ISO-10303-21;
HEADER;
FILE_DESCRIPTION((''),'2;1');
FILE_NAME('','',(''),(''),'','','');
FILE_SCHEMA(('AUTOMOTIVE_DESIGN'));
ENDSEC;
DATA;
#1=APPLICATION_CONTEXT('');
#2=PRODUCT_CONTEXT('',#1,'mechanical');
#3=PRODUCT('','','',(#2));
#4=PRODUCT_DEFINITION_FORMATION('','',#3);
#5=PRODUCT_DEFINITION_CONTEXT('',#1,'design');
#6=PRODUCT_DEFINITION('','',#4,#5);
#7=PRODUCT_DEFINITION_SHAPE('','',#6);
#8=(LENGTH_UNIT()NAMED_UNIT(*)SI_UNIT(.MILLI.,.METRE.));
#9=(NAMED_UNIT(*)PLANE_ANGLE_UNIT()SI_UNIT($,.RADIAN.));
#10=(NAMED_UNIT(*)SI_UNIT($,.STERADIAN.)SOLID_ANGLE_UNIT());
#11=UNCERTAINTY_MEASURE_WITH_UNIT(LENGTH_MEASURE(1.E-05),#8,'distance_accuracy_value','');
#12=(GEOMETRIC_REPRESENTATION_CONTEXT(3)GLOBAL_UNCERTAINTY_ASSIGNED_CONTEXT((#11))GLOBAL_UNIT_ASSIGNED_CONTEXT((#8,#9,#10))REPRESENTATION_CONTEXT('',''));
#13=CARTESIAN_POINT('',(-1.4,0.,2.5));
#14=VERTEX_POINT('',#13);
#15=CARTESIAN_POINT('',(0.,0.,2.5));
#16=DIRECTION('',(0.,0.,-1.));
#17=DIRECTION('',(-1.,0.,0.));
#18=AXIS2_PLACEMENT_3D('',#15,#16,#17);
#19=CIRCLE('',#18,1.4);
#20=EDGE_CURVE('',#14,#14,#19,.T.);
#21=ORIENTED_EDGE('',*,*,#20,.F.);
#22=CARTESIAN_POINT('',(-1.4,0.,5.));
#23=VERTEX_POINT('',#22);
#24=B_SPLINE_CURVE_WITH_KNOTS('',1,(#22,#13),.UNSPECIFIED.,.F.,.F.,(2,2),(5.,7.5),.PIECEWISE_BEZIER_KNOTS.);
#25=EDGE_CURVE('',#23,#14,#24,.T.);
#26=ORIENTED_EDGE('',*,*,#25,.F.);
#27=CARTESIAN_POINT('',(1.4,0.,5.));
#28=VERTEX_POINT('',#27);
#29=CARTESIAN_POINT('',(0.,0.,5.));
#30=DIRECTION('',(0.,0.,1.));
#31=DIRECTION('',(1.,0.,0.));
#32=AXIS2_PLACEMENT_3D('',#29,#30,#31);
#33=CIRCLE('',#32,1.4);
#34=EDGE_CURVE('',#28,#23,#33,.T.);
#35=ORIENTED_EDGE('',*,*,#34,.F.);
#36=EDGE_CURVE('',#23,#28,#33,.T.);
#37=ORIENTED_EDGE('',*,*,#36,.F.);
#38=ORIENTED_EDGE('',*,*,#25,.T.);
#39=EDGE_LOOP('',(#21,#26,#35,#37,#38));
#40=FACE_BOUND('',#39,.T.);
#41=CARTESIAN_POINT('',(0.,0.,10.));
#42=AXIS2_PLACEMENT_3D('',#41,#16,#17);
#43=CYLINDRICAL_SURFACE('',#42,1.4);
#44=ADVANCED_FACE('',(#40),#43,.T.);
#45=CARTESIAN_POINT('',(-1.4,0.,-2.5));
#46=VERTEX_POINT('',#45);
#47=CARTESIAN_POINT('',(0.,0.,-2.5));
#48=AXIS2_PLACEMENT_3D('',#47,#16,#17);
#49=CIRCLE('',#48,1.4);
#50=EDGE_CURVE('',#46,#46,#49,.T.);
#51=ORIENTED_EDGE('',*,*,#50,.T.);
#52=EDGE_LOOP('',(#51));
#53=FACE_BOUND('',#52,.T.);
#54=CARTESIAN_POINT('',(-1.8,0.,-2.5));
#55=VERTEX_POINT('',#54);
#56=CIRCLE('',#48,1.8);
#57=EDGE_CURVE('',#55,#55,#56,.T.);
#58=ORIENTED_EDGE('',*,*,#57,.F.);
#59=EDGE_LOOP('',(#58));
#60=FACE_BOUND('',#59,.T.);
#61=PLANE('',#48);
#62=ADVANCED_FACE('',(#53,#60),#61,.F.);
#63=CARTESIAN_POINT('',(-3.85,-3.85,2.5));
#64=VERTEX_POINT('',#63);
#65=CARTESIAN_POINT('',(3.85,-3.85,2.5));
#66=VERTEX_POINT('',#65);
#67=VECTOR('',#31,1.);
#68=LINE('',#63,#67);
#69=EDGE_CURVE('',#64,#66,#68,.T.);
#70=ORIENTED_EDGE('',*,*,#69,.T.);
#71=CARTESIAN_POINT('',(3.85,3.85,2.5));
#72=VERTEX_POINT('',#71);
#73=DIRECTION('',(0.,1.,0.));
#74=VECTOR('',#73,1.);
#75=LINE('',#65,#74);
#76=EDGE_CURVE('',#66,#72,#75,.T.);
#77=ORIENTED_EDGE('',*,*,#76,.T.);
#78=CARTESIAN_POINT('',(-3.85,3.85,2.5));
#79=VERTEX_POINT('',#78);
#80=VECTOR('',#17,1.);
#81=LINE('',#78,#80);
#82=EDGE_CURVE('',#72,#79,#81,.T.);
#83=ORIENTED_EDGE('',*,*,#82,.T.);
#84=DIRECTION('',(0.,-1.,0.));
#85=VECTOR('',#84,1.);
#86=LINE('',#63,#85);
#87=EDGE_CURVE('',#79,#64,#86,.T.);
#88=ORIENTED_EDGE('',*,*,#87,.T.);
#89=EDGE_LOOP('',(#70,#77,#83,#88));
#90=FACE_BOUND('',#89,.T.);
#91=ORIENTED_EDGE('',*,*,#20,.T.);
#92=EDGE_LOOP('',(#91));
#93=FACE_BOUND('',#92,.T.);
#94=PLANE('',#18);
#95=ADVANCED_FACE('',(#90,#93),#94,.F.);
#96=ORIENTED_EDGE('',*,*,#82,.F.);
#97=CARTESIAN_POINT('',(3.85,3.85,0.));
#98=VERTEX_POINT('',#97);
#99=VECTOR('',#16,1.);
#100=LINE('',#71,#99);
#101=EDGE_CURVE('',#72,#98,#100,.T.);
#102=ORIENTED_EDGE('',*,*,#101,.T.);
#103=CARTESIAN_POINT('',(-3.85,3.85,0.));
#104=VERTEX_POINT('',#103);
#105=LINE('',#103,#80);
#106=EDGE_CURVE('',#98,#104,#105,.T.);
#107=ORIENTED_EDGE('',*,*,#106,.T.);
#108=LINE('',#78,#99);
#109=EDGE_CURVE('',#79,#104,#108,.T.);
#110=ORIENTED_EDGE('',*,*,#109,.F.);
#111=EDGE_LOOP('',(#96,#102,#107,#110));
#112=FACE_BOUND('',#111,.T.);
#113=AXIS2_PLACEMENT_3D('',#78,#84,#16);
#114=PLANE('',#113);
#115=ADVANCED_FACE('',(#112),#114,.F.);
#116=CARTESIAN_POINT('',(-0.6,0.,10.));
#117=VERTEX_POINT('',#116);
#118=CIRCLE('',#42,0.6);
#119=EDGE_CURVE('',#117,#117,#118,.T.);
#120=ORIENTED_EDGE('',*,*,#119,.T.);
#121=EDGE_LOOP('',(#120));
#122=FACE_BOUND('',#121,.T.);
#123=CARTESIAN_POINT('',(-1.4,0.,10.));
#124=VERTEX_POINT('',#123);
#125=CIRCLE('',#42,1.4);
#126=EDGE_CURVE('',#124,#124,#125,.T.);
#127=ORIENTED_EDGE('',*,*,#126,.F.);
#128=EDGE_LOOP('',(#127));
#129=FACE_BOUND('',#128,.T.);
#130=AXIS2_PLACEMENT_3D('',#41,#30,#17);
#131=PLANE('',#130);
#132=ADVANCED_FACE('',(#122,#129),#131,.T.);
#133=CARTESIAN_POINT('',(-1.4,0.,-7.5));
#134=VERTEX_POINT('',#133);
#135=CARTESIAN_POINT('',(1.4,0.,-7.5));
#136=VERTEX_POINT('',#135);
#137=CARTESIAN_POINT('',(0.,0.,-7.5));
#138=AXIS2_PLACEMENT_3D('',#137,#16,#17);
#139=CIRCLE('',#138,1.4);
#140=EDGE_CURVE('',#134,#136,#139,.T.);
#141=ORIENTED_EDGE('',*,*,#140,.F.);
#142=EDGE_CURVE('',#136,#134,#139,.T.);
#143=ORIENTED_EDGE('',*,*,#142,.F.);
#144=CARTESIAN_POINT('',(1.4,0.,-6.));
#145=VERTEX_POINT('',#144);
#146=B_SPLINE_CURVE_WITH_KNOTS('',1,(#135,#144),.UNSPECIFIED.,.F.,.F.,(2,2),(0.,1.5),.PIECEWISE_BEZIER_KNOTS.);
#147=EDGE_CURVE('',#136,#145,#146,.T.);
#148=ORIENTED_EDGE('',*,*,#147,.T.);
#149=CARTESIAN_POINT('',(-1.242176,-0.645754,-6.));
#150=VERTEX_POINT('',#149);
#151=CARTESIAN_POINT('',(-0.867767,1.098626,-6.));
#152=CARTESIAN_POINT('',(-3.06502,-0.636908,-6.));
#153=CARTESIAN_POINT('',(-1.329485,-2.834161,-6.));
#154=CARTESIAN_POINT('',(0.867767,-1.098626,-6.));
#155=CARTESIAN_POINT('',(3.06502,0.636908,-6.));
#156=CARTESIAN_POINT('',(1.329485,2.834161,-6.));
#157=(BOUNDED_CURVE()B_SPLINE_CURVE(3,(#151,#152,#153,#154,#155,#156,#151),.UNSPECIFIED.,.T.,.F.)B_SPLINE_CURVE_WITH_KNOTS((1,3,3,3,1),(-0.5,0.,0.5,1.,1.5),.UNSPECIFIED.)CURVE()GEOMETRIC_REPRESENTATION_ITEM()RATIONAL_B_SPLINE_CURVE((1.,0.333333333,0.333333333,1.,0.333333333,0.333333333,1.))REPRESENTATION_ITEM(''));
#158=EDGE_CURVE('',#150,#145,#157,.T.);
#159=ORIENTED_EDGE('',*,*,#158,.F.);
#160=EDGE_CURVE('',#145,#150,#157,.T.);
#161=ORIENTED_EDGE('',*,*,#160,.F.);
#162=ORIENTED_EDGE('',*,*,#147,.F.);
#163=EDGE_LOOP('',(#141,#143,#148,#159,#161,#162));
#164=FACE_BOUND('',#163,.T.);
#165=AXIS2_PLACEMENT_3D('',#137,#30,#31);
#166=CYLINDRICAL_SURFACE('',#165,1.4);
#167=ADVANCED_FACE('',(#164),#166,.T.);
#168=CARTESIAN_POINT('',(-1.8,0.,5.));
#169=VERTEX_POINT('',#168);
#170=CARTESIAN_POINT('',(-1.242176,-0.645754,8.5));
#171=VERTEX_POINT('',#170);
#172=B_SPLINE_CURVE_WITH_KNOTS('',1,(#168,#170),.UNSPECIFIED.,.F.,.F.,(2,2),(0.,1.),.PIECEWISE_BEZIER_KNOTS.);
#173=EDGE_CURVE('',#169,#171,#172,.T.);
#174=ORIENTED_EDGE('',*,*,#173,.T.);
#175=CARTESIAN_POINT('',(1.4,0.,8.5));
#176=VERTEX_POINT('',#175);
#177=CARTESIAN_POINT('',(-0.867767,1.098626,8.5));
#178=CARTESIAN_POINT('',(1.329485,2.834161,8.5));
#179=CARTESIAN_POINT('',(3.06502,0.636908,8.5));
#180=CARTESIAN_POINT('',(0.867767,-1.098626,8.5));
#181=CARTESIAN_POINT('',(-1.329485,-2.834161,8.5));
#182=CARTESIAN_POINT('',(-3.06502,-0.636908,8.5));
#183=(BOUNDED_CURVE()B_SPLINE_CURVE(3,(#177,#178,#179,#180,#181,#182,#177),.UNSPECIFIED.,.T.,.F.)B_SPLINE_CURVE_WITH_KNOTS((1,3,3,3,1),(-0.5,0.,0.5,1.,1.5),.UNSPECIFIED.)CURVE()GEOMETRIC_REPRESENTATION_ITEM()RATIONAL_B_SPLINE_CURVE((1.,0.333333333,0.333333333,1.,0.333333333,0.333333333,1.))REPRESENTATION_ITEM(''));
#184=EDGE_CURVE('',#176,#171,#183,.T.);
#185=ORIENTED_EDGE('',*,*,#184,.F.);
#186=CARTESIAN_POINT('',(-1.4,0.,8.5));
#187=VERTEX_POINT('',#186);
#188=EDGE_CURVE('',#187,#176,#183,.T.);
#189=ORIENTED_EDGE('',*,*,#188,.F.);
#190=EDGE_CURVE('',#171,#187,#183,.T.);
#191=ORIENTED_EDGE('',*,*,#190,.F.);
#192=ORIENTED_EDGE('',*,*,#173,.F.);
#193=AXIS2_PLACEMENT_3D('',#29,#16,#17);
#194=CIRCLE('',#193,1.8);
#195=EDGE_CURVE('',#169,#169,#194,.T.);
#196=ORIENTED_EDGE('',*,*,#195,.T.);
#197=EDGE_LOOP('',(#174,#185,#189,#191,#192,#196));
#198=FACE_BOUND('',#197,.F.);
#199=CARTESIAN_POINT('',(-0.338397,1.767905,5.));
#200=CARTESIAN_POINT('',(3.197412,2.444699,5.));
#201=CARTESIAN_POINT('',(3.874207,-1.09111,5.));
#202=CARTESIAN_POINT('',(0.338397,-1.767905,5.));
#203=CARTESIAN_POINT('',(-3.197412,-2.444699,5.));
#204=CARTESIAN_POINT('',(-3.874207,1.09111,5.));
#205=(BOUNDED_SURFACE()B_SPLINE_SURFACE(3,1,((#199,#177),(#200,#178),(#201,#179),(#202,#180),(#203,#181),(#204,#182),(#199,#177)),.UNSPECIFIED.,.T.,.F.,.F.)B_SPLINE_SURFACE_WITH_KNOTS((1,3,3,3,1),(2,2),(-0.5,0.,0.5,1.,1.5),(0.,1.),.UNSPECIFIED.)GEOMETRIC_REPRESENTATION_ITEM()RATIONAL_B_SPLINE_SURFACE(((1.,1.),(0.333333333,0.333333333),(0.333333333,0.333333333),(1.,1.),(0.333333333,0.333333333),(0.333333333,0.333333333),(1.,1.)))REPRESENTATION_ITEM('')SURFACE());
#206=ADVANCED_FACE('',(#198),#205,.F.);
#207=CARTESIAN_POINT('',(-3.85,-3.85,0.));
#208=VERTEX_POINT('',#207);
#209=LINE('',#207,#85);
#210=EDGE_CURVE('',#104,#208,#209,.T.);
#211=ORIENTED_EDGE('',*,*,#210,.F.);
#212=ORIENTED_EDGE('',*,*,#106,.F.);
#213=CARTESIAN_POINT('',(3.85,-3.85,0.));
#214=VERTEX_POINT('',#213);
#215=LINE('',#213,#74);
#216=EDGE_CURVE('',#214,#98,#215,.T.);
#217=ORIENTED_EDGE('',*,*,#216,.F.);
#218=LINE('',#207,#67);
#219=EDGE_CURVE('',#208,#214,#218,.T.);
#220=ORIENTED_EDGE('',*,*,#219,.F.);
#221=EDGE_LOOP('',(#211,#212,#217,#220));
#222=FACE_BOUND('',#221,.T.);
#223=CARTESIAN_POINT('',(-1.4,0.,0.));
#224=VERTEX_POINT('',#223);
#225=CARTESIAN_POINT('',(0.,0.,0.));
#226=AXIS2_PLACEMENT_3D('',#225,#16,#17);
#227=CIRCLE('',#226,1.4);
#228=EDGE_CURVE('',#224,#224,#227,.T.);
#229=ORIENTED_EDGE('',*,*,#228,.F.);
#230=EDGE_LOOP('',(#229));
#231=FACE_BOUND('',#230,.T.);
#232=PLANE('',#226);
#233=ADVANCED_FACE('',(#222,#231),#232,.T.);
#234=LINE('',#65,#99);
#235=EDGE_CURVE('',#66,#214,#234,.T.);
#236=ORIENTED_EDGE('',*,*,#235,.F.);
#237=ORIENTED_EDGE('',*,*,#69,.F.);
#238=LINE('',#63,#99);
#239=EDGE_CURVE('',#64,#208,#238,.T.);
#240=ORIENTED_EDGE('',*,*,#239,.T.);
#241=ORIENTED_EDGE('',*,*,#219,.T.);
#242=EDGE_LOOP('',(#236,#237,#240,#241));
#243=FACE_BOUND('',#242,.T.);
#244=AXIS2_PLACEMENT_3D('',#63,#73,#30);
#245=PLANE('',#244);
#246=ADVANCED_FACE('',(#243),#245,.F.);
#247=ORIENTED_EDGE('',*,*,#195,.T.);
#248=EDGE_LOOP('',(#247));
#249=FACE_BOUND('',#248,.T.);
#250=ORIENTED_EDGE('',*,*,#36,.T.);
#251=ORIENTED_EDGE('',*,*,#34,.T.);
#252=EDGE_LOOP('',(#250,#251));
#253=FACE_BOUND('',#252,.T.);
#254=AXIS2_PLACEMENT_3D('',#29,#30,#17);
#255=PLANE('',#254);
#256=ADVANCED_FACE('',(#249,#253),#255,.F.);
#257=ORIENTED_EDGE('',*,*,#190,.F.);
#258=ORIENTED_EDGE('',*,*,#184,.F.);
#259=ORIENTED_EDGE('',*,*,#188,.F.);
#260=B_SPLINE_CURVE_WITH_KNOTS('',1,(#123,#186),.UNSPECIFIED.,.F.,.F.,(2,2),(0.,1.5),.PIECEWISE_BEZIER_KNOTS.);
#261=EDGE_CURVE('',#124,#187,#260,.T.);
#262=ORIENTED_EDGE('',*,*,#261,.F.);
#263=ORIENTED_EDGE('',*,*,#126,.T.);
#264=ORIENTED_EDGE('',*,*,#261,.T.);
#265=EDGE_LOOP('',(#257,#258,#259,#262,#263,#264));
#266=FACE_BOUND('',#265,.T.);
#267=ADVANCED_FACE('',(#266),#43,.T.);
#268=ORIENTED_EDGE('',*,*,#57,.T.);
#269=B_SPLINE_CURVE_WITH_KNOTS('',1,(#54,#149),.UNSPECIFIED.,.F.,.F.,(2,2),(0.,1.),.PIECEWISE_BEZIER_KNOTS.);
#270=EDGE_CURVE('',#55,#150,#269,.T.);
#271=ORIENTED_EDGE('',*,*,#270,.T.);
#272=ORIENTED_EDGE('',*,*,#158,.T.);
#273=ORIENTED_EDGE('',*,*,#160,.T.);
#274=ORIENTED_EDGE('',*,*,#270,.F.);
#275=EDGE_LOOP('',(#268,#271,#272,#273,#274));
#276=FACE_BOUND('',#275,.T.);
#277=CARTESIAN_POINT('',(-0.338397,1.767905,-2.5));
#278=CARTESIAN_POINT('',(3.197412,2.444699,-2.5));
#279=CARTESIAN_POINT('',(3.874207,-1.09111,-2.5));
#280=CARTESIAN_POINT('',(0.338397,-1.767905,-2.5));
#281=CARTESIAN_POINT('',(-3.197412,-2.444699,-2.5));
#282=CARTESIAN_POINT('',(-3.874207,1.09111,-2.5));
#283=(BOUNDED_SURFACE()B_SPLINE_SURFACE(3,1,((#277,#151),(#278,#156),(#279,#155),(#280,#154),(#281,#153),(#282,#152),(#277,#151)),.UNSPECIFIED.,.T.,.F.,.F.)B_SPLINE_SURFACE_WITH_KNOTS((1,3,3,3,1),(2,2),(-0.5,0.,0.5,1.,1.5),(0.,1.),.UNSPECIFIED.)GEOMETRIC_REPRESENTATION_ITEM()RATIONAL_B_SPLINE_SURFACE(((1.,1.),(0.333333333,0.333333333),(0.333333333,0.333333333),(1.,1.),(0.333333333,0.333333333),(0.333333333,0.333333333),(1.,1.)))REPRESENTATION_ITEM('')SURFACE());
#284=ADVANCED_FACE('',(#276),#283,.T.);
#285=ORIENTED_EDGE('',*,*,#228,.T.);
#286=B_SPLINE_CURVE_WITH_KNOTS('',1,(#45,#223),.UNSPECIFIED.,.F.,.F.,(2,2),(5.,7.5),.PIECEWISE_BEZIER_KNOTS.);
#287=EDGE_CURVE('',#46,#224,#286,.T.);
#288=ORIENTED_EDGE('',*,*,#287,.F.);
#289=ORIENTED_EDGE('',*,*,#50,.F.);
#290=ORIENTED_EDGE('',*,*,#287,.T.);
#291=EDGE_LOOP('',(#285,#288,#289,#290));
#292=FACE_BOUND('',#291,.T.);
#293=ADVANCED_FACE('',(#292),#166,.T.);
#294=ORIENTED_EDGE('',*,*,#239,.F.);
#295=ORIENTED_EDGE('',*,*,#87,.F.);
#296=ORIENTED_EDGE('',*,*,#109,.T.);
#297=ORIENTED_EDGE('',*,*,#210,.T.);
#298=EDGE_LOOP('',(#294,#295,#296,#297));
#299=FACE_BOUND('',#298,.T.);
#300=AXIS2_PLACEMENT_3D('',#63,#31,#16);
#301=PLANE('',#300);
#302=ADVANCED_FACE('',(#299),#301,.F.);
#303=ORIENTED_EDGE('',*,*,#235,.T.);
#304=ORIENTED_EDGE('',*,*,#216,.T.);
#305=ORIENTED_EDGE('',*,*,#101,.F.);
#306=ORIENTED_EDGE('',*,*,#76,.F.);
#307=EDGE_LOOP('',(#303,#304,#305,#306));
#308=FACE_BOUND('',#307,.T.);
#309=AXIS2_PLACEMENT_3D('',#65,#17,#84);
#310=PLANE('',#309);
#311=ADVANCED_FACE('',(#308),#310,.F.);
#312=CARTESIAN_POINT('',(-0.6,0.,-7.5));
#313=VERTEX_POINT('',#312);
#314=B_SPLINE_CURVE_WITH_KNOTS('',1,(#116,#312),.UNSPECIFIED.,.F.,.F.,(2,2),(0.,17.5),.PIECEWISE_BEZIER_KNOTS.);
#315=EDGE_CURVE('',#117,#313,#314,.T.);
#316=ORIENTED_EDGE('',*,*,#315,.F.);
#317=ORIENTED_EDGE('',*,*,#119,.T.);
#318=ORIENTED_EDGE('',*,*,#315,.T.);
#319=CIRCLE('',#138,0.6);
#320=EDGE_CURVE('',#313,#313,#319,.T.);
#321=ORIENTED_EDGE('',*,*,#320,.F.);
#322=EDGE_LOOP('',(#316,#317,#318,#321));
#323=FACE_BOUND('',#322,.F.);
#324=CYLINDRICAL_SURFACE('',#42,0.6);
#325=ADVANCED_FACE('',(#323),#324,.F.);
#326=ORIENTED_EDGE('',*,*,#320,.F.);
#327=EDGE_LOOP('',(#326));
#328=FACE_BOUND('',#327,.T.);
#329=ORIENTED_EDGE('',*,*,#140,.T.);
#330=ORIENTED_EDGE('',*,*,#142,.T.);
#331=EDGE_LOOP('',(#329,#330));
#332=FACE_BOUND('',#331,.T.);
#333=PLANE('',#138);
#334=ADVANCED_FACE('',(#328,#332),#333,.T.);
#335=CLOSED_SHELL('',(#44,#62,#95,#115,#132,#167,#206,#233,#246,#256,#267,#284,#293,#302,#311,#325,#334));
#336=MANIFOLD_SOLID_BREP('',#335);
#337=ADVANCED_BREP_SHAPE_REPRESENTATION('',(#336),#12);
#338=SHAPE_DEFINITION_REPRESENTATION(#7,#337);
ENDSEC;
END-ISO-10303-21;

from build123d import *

# Parameters (mm, degrees)
CROQUIS1_W              = 7.7
CROQUIS1_H              = 7.7
SALIENTE_EXTRUIR1_DEPTH = 2.5
CROQUIS2_R              = 1.4
SALIENTE_EXTRUIR2_DEPTH = 7.5
CROQUIS6_R              = 0.6
CORTAR_EXTRUIR1_DEPTH   = 19.327438542


with BuildPart() as part:
    # Croquis1 → Saliente-Extruir1 (new body)
    with BuildSketch(Plane.XY):
        Rectangle(CROQUIS1_W, CROQUIS1_H)
    extrude(amount=SALIENTE_EXTRUIR1_DEPTH)

    # Croquis2 → Saliente-Extruir2 (add)
    with BuildSketch(Plane(origin=(0, 0, 0), x_dir=(-1, 0, 0), z_dir=(0, 0, -1))):
        Circle(CROQUIS2_R)
    saliente_extruir2 = extrude(amount=SALIENTE_EXTRUIR2_DEPTH)

    # Recubrir2: read off the stored shape, not the designer's step
    # Recubrir2: loft between two sections, ruled curve by curve
    recubrir2_from = [
        Edge.make_bspline([(-0.33839724, 1.767904779, -2.5), (3.197412318, 2.44469926, -2.5), (3.874206798, -1.091110298, -2.5), (0.33839724, -1.767904779, -2.5), (-3.197412318, -2.44469926, -2.5), (-3.874206798, 1.091110298, -2.5), (-0.33839724, 1.767904779, -2.5)], [0, 0, 0, 0, 0.5, 0.5, 0.5, 1, 1, 1, 1], 3, [1, 0.333333333, 0.333333333, 1, 0.333333333, 0.333333333, 1]),
    ]
    recubrir2_to = [
        Edge.make_bspline([(-0.867767345, 1.09862634, -6), (1.329485334, 2.83416103, -6), (3.065020025, 0.636908351, -6), (0.867767345, -1.09862634, -6), (-1.329485334, -2.83416103, -6), (-3.065020025, -0.636908351, -6), (-0.867767345, 1.09862634, -6)], [0, 0, 0, 0, 0.5, 0.5, 0.5, 1, 1, 1, 1], 3, [1, 0.333333333, 0.333333333, 1, 0.333333333, 0.333333333, 1]),
    ]
    recubrir2 = Solid(Shell([*[Face.make_surface_from_curves(recubrir2_from[k], recubrir2_to[k]) for k in range(1)], Face(Wire(recubrir2_from)), Face(Wire(recubrir2_to))]))
    add(recubrir2)

    # Simetría2: Saliente-Extruir2, Recubrir2 across plane
    add(saliente_extruir2.mirror(Plane(origin=(0, 0, 1.25), x_dir=(1, 0, 0), z_dir=(0, 0, -1))))
    add(recubrir2.mirror(Plane(origin=(0, 0, 1.25), x_dir=(1, 0, 0), z_dir=(0, 0, -1))))

    # Croquis6 → Cortar-Extruir1 (cut, through all)
    with BuildSketch(Plane(origin=(0, 0, -7.5), x_dir=(-1, 0, 0), z_dir=(0, 0, -1))):
        Circle(CROQUIS6_R)
    extrude(amount=-CORTAR_EXTRUIR1_DEPTH, mode=Mode.SUBTRACT)


solid = part.part
